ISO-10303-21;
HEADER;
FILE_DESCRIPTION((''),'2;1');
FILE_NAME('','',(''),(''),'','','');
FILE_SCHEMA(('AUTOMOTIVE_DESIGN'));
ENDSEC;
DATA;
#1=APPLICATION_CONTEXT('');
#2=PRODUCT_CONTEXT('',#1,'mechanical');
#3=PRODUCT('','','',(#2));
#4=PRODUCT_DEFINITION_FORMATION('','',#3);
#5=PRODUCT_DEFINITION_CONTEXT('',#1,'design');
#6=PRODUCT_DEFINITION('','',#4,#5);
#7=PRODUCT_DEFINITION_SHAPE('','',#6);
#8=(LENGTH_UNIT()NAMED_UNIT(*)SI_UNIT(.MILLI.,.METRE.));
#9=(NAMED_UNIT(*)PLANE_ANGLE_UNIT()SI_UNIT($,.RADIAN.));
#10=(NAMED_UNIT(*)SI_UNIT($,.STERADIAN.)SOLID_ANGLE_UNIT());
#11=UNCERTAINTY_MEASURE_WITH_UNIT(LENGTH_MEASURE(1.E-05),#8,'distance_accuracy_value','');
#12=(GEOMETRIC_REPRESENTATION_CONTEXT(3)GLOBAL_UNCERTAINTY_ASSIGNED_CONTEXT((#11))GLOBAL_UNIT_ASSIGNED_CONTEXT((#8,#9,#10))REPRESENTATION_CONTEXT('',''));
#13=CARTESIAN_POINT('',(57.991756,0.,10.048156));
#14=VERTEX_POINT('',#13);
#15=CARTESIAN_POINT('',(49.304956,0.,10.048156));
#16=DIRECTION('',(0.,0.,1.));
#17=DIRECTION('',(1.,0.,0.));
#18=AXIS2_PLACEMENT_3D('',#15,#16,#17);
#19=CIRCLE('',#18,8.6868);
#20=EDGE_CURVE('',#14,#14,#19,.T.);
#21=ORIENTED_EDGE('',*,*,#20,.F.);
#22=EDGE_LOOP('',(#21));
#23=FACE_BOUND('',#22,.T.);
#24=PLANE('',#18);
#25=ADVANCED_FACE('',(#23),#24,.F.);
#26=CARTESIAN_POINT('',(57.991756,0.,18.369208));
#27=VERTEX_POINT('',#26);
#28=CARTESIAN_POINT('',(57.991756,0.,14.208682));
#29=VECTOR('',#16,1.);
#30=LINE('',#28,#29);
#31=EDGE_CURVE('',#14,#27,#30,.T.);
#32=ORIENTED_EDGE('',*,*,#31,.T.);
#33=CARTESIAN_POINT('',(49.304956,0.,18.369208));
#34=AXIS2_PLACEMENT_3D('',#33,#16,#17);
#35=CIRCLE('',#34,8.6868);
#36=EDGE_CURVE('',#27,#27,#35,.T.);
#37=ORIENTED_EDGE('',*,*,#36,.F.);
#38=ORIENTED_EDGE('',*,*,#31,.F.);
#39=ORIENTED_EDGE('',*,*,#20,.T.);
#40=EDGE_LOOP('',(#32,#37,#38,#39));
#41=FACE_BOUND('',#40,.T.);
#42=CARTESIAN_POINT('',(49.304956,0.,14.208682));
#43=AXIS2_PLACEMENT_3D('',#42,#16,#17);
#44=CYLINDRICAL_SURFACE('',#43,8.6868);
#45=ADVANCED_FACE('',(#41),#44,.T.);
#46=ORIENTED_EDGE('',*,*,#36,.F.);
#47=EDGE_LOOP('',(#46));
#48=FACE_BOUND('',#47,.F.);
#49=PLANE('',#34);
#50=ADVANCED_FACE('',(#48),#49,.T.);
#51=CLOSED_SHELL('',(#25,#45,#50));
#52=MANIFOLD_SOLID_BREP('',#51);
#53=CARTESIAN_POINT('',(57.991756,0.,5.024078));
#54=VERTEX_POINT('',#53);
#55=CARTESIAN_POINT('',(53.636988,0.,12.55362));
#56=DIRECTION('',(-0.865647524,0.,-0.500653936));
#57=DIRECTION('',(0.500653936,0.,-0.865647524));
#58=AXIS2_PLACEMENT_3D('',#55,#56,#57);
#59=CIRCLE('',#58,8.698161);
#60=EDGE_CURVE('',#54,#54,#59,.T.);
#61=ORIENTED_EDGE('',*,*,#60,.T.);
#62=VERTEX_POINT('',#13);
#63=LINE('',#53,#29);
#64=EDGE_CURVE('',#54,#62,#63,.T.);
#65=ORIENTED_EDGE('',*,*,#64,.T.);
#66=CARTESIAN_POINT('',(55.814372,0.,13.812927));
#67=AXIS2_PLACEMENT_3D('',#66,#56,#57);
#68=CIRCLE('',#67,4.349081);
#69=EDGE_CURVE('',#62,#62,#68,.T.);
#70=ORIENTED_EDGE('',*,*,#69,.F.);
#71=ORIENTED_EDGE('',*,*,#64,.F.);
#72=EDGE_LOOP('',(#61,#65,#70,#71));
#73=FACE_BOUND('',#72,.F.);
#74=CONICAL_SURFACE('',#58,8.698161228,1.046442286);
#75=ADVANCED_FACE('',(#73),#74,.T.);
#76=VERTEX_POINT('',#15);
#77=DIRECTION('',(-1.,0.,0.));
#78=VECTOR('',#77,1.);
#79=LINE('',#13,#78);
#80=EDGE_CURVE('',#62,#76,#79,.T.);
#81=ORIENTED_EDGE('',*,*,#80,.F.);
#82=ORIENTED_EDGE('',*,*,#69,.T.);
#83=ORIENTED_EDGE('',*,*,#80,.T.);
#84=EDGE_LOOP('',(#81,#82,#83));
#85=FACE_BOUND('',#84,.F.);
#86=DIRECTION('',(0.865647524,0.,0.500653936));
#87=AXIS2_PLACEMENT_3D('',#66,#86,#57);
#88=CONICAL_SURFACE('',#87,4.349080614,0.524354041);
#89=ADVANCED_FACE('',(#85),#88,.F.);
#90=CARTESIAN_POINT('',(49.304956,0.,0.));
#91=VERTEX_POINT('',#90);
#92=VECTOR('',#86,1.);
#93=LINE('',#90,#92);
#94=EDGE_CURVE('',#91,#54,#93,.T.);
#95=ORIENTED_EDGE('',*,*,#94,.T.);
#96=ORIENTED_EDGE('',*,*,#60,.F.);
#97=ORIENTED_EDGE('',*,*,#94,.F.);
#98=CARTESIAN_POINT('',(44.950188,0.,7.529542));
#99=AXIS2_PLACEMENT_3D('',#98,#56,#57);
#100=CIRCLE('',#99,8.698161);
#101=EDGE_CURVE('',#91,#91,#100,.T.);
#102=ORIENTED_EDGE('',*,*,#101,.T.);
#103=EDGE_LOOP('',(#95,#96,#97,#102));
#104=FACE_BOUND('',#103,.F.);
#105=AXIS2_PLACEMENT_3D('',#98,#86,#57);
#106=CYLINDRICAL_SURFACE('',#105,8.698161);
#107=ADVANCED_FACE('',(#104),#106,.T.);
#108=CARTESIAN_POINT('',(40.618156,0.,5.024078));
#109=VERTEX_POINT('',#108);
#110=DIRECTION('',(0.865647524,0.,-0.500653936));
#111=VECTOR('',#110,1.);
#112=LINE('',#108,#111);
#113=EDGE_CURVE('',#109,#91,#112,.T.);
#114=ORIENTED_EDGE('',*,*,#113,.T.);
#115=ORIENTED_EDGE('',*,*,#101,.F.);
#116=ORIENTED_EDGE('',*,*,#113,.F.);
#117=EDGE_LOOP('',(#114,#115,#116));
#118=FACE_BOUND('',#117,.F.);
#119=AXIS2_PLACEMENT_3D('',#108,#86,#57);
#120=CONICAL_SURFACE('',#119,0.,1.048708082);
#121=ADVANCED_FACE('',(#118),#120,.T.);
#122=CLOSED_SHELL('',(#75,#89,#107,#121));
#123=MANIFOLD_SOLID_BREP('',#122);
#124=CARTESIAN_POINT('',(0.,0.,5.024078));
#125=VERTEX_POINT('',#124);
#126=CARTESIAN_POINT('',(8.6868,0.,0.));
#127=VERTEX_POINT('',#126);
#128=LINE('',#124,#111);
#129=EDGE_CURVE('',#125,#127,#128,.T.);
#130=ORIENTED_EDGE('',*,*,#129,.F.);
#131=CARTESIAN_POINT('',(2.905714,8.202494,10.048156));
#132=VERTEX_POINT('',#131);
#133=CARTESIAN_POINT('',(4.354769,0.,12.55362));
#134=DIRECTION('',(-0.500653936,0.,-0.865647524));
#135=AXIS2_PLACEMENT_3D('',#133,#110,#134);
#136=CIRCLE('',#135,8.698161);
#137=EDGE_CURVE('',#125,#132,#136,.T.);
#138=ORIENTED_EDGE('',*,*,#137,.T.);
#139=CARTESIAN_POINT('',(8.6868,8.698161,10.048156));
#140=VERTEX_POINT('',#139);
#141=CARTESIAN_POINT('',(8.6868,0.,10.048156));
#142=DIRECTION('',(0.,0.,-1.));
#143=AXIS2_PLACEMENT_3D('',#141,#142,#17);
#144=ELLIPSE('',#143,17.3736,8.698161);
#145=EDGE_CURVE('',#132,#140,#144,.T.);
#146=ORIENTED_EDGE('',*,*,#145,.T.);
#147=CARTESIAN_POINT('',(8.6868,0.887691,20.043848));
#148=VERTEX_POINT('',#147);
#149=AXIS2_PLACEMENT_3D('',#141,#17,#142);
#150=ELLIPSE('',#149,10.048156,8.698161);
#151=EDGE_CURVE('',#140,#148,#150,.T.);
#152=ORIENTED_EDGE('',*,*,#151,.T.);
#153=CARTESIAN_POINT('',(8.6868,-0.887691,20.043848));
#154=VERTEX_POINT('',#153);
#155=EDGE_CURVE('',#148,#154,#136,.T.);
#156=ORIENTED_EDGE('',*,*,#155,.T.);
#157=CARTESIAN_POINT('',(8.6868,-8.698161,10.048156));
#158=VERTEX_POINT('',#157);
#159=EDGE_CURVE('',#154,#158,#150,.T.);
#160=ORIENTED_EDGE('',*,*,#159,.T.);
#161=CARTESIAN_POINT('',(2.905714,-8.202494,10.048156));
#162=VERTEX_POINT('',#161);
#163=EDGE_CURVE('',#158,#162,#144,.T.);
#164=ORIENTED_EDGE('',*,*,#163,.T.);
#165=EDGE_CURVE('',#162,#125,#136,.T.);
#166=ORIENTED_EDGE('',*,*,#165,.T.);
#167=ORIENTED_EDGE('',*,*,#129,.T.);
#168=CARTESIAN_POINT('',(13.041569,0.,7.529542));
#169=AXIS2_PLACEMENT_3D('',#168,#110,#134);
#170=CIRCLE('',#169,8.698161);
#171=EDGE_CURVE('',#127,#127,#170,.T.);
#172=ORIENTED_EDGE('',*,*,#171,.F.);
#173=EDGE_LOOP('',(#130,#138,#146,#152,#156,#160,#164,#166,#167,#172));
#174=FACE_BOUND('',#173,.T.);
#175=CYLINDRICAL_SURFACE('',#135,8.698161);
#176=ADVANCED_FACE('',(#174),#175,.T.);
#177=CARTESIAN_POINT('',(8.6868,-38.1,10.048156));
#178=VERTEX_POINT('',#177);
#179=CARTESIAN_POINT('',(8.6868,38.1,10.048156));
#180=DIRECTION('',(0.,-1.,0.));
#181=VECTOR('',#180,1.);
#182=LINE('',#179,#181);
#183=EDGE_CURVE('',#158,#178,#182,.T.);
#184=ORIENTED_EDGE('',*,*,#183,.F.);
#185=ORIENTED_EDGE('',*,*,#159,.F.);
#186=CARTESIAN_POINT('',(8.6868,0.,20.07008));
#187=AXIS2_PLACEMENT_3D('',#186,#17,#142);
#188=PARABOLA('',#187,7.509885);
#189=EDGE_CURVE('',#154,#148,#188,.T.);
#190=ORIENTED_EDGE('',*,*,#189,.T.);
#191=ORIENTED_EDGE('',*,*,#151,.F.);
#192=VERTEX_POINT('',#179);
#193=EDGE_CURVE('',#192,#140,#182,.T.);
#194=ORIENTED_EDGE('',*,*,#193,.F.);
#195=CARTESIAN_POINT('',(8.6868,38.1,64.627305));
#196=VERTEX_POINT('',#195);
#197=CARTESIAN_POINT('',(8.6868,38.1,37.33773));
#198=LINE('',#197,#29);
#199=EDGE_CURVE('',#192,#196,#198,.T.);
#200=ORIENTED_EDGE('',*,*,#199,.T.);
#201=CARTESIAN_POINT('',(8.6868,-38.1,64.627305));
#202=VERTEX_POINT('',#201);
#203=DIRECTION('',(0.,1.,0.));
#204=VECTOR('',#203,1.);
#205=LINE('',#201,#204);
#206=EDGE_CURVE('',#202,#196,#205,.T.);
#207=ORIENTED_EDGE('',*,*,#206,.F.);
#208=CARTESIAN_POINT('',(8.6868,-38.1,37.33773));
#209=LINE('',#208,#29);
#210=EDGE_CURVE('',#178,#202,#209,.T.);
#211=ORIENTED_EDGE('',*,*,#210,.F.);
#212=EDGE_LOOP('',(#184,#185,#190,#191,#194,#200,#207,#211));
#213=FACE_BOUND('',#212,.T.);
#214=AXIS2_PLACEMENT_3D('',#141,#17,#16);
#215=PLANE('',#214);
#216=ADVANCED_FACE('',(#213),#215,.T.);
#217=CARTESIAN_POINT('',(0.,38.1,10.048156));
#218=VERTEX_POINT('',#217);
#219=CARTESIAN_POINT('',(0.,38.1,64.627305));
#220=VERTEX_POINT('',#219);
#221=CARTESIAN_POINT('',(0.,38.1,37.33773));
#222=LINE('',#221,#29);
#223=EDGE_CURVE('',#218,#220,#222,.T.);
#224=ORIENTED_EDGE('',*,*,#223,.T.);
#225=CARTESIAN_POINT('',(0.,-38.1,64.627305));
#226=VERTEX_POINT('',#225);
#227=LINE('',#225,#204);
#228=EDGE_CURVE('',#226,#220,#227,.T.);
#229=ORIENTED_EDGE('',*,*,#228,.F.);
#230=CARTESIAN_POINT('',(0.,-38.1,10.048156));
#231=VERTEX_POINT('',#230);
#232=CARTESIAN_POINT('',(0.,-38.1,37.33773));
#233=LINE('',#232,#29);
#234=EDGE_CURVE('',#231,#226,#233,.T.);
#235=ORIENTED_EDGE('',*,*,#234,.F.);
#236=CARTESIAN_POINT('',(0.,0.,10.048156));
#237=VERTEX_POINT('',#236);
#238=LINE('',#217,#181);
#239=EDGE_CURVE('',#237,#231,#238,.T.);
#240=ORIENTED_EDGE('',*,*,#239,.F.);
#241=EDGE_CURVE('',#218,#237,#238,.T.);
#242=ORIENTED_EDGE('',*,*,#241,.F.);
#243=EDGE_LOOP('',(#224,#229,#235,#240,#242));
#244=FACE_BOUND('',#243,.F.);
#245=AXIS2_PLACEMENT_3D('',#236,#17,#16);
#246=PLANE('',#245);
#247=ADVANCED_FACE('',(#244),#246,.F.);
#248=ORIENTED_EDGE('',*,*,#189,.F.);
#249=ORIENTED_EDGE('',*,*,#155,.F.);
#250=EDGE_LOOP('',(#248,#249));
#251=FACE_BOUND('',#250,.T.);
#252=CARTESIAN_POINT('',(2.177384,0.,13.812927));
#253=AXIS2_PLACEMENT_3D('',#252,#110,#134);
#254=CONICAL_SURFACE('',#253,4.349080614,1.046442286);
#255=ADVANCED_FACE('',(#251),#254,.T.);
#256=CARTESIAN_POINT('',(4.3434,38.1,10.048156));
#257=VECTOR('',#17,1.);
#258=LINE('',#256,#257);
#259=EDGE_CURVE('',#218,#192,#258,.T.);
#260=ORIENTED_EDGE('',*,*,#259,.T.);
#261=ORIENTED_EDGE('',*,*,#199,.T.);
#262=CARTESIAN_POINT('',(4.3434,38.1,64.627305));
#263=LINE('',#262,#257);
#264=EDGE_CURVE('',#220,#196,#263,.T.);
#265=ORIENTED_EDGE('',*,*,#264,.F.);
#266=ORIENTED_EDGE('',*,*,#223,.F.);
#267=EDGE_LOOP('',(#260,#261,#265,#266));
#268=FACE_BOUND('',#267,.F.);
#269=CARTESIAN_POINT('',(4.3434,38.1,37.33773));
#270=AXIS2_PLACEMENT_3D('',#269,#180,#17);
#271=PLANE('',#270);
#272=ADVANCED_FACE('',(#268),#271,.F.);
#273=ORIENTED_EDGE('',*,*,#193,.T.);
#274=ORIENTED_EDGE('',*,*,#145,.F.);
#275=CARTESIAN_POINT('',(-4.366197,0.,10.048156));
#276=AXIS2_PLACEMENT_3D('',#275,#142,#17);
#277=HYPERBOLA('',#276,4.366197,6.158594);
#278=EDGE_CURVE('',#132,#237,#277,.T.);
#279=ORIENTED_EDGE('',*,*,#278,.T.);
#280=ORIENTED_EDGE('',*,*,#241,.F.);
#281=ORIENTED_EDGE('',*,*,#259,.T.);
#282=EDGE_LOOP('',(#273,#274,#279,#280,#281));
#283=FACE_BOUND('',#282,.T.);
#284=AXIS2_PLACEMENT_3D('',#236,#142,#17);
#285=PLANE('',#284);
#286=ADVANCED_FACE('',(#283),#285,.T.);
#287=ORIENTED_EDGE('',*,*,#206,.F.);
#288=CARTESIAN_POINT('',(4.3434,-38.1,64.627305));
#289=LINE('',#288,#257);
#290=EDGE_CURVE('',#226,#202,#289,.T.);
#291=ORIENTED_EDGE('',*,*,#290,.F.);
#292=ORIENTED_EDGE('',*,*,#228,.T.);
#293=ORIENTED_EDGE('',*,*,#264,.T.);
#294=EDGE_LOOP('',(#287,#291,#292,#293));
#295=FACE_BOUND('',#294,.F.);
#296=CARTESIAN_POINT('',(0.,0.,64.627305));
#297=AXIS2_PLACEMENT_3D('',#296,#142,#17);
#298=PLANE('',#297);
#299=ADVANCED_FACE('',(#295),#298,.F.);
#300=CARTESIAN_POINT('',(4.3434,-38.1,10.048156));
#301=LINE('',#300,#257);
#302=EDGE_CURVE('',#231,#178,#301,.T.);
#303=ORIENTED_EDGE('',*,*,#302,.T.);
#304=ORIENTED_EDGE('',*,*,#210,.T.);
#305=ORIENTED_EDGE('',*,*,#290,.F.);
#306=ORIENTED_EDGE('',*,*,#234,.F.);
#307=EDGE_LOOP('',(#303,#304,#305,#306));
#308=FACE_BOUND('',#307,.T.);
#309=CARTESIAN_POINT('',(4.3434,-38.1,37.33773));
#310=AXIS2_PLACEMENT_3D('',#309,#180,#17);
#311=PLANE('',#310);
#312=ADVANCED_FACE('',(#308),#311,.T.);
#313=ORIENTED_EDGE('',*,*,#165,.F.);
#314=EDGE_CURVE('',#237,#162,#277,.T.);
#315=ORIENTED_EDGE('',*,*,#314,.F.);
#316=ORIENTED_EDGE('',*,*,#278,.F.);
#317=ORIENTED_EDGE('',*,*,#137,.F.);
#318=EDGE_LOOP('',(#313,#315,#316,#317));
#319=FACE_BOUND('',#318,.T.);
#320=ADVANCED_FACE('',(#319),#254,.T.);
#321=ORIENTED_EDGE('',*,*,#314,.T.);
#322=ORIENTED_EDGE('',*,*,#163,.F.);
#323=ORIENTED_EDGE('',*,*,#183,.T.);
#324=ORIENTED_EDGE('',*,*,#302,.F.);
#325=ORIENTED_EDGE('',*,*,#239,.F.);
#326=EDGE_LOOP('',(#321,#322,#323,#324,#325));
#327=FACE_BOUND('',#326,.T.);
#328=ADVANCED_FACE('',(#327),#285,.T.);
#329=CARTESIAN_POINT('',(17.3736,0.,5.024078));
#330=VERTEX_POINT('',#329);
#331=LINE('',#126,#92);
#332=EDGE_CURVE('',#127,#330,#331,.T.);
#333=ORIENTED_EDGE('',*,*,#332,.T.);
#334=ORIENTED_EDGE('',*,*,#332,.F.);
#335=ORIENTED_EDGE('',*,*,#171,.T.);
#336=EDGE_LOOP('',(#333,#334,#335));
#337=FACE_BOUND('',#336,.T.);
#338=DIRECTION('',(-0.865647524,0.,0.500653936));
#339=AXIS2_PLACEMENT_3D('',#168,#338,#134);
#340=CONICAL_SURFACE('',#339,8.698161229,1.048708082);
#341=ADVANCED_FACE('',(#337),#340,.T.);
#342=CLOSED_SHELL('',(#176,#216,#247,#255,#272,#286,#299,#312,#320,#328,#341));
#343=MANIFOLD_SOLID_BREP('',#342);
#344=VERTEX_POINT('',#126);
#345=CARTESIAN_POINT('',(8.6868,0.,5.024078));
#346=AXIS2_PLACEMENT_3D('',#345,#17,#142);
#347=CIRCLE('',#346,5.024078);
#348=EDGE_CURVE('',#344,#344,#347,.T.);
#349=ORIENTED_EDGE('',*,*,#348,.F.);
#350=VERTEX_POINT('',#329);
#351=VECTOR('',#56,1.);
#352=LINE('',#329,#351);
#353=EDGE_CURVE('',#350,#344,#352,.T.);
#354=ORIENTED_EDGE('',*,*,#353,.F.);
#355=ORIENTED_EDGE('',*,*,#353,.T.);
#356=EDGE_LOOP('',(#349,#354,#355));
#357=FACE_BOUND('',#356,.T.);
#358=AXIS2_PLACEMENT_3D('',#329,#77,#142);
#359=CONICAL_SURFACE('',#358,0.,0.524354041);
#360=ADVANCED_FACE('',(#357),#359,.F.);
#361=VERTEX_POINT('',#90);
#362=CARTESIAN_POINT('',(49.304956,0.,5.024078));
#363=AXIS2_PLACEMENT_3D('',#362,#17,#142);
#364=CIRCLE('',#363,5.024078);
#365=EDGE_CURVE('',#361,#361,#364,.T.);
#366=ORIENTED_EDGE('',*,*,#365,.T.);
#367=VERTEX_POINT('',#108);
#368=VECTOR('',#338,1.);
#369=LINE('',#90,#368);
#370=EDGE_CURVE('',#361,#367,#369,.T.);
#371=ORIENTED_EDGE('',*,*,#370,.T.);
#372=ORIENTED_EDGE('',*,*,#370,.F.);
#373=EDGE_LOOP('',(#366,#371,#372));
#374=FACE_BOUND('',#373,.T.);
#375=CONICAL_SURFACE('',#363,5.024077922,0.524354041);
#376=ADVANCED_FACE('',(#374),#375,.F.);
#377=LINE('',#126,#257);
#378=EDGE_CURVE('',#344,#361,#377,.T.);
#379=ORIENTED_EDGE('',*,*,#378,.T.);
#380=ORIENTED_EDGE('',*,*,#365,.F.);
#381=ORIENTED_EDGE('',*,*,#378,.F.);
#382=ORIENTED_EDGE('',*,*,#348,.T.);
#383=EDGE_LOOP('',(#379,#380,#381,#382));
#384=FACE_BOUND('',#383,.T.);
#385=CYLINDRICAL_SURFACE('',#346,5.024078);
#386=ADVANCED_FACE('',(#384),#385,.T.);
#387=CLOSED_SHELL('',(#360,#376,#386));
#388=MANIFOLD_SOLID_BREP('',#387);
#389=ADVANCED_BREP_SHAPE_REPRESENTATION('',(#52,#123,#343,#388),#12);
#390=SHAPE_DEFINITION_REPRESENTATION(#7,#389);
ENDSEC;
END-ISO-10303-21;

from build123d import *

# Parameters (mm, degrees)
F0_W     = 8.6868
F0_H     = 8.3210518658
F0_H_2   = 54.579148829
F5_DEPTH = 38.1


with BuildPart() as f1:
    # F0 (on Front) → F1 (revolve)
    with BuildSketch(Plane.XZ):
        Polygon((0, 10.0481558442), (0, 5.0240779221), (8.6868, 10.0481558442), align=None)
        Polygon((8.6868, 10.0481558442), (8.6868, 5.0240779221), (17.3736, 5.0240779221), align=None)
        Polygon((8.6868, 10.0481558442), (0, 5.0240779221), (8.6868, 5.0240779221), align=None)
        Polygon((8.6868, 5.0240779221), (0, 5.0240779221), (8.6868, 0), align=None)
        Polygon((17.3736, 5.0240779221), (8.6868, 5.0240779221), (8.6868, 0), align=None)
    revolve(axis=Axis((13.0302, 0, 7.5361168832), (0.8656475241, 0, -0.5006539363)))

    # F0 (on Front) → F5 (join, symmetric)
    with BuildSketch(Plane.XZ):
        with Locations((4.3434, 37.3377302587)):
            Rectangle(F0_W, F0_H_2)
    extrude(amount=F5_DEPTH, both=True)


with BuildPart() as f2:
    # F0 (on Front) → F2 (revolve)
    with BuildSketch(Plane.XZ):
        Polygon((40.6181564641, 5.0240779221), (49.3049564641, 0), (49.3049564641, 5.0240779221), align=None)
        Polygon((49.3049564641, 10.0481558442), (40.6181564641, 5.0240779221), (49.3049564641, 5.0240779221), align=None)
        Polygon((49.3049564641, 5.0240779221), (49.3049564641, 0), (57.9917564641, 5.0240779221), (49.3049564641, 10.0481558442), align=None)
        Polygon((49.3049564641, 10.0481558442), (57.9917564641, 5.0240779221), (57.9917564641, 10.0481558442), align=None)
    revolve(axis=Axis((44.9615564641, 0, 7.5361168832), (-0.8656475241, 0, -0.5006539363)))


with BuildPart() as f3:
    # F0 (on Front) → F3 (revolve)
    with BuildSketch(Plane.XZ):
        Polygon((17.3736, 5.0240779221), (8.6868, 0), (49.3049564641, 0), (40.6181564641, 5.0240779221), align=None)
    revolve(axis=Axis((28.995878232, 0, 5.0240779221), (1, 0, 0)))


with BuildPart() as f4:
    # F0 (on Front) → F4 (revolve)
    with BuildSketch(Plane.XZ):
        with Locations((53.6483564641, 14.2086817771)):
            Rectangle(F0_W, F0_H)
    revolve(axis=Axis((49.3049564641, 0, 11.6966428161), (0, 0, 1)))


solid = Compound([f1.part, f2.part, f3.part, f4.part])
